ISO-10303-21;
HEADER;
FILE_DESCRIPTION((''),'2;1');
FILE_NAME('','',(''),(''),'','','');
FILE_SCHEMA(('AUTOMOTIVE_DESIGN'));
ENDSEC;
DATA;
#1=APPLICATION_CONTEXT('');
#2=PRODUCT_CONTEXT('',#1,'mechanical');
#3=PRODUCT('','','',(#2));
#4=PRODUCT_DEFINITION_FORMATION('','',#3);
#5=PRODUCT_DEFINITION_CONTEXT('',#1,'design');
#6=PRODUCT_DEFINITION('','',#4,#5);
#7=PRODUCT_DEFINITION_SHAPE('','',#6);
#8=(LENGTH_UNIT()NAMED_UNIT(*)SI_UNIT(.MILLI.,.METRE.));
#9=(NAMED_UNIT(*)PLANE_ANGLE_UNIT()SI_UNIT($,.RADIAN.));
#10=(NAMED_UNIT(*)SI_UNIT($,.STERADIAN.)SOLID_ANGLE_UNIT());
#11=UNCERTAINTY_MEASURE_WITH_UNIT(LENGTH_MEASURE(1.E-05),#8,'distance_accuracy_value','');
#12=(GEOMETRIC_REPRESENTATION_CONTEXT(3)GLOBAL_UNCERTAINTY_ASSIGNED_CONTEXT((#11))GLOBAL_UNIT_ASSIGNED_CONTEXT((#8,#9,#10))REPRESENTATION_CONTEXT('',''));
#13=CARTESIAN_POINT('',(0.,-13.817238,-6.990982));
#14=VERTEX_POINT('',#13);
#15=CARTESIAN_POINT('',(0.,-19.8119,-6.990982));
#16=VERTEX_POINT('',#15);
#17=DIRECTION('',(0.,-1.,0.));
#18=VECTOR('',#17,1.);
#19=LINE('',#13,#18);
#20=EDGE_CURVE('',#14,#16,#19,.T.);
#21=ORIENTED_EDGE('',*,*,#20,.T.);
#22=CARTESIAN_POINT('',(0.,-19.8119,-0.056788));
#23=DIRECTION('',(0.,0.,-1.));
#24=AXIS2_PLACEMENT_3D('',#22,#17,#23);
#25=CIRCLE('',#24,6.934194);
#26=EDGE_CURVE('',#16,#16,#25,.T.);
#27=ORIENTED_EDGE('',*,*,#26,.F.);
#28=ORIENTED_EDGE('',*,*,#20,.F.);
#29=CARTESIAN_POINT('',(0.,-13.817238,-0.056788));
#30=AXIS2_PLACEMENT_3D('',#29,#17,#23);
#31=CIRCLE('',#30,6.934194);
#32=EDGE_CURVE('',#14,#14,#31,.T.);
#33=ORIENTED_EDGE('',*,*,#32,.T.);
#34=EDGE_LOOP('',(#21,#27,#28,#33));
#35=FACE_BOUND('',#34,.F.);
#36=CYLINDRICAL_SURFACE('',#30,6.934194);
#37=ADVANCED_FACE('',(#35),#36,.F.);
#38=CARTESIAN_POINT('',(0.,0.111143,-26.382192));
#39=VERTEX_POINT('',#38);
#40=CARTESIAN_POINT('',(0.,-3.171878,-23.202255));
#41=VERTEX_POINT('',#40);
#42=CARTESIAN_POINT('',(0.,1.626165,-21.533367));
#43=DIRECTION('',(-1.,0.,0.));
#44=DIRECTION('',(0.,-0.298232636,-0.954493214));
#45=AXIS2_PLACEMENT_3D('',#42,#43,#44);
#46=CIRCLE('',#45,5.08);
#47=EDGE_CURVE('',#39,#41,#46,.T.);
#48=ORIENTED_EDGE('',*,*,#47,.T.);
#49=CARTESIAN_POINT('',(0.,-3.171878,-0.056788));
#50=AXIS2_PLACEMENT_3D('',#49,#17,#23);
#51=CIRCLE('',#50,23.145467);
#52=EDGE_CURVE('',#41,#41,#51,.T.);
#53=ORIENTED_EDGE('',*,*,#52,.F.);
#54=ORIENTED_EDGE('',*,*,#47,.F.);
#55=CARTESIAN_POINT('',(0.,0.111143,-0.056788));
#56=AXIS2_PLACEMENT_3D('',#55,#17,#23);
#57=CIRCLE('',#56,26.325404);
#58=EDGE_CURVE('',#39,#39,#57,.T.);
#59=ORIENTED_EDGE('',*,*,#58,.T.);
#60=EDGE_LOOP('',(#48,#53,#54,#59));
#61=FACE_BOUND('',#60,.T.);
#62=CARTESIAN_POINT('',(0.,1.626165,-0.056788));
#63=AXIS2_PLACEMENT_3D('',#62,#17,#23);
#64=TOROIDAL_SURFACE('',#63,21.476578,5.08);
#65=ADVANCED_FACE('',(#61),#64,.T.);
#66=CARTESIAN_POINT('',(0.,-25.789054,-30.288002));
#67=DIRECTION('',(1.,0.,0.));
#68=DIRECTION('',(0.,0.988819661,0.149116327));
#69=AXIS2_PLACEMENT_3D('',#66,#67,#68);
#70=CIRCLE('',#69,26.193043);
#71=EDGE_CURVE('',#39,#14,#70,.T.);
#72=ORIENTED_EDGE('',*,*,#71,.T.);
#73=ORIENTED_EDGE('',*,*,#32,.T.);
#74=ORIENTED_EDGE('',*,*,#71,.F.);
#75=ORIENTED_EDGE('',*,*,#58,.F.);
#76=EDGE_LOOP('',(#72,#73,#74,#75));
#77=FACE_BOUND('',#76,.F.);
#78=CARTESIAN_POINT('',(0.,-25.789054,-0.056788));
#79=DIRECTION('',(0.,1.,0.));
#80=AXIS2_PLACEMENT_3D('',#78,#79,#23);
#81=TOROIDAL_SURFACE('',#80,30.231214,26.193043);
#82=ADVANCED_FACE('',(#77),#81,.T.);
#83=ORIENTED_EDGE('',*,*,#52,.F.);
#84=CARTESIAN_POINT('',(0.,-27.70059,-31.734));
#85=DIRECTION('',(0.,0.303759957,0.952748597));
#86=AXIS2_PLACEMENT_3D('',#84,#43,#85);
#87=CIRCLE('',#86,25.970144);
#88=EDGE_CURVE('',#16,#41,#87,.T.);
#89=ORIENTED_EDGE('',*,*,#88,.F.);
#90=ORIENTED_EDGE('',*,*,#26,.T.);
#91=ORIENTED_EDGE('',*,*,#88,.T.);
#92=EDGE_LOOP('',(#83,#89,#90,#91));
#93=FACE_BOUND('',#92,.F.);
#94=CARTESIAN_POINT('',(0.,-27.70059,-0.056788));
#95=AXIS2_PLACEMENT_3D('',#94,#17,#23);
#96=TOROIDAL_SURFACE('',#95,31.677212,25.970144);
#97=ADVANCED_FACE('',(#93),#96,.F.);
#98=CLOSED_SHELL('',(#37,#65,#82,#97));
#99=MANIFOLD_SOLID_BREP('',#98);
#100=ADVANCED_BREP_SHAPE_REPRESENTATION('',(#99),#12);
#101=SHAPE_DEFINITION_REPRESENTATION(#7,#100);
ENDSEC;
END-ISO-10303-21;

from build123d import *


# Not quite as in the source:
# - a fillet or chamfer that OpenCascade refuses, or shapes differently, is made with other operations: its cross-section is extruded or revolved along the edge and cut away or added


with BuildPart() as f1:
    # F0 (on Right) → F1 (revolve)
    with BuildSketch(Plane.YZ):
        with BuildLine():
            Line((-2.2878659654, -26.3821920429), (0.1111427558, -26.3821920429))
            ThreePointArc((0.1111427558, -26.3821920429), (-4.5151946669, -15.0073463307), (-13.8172382977, -6.9909819916))
            Line((-13.8172382977, -6.9909819916), (-19.8118997502, -6.9909819916))
            ThreePointArc((-19.8118997502, -6.9909819916), (-8.4327201707, -14.3214304732), (-2.2878659654, -26.3821920429))
        make_face()
    revolve(axis=Axis((0, -9.8503784972, -0.0567880845), (0, -1, 0)))

    # F2: fillet of radius 5.08 on 1 edges, made by hand

    # F2_s1 → F2_t2 (revolve, cut)
    with BuildSketch(Plane.YZ):
        with BuildLine():
            ThreePointArc((0.1111427558, -26.3821920429), (-1.9081947571, -25.1822984596), (-3.171877995, -23.2022547035))
            ThreePointArc((-3.171877995, -23.2022547035), (-2.6793038851, -24.7781656105), (-2.2878659654, -26.3821920429))
            Line((-2.2878659654, -26.3821920429), (0.1111427558, -26.3821920429))
        make_face()
    revolve(axis=Axis((0, -2.2878659654, -0.0567880845), (0, -1, 0)), mode=Mode.SUBTRACT)


solid = f1.part
